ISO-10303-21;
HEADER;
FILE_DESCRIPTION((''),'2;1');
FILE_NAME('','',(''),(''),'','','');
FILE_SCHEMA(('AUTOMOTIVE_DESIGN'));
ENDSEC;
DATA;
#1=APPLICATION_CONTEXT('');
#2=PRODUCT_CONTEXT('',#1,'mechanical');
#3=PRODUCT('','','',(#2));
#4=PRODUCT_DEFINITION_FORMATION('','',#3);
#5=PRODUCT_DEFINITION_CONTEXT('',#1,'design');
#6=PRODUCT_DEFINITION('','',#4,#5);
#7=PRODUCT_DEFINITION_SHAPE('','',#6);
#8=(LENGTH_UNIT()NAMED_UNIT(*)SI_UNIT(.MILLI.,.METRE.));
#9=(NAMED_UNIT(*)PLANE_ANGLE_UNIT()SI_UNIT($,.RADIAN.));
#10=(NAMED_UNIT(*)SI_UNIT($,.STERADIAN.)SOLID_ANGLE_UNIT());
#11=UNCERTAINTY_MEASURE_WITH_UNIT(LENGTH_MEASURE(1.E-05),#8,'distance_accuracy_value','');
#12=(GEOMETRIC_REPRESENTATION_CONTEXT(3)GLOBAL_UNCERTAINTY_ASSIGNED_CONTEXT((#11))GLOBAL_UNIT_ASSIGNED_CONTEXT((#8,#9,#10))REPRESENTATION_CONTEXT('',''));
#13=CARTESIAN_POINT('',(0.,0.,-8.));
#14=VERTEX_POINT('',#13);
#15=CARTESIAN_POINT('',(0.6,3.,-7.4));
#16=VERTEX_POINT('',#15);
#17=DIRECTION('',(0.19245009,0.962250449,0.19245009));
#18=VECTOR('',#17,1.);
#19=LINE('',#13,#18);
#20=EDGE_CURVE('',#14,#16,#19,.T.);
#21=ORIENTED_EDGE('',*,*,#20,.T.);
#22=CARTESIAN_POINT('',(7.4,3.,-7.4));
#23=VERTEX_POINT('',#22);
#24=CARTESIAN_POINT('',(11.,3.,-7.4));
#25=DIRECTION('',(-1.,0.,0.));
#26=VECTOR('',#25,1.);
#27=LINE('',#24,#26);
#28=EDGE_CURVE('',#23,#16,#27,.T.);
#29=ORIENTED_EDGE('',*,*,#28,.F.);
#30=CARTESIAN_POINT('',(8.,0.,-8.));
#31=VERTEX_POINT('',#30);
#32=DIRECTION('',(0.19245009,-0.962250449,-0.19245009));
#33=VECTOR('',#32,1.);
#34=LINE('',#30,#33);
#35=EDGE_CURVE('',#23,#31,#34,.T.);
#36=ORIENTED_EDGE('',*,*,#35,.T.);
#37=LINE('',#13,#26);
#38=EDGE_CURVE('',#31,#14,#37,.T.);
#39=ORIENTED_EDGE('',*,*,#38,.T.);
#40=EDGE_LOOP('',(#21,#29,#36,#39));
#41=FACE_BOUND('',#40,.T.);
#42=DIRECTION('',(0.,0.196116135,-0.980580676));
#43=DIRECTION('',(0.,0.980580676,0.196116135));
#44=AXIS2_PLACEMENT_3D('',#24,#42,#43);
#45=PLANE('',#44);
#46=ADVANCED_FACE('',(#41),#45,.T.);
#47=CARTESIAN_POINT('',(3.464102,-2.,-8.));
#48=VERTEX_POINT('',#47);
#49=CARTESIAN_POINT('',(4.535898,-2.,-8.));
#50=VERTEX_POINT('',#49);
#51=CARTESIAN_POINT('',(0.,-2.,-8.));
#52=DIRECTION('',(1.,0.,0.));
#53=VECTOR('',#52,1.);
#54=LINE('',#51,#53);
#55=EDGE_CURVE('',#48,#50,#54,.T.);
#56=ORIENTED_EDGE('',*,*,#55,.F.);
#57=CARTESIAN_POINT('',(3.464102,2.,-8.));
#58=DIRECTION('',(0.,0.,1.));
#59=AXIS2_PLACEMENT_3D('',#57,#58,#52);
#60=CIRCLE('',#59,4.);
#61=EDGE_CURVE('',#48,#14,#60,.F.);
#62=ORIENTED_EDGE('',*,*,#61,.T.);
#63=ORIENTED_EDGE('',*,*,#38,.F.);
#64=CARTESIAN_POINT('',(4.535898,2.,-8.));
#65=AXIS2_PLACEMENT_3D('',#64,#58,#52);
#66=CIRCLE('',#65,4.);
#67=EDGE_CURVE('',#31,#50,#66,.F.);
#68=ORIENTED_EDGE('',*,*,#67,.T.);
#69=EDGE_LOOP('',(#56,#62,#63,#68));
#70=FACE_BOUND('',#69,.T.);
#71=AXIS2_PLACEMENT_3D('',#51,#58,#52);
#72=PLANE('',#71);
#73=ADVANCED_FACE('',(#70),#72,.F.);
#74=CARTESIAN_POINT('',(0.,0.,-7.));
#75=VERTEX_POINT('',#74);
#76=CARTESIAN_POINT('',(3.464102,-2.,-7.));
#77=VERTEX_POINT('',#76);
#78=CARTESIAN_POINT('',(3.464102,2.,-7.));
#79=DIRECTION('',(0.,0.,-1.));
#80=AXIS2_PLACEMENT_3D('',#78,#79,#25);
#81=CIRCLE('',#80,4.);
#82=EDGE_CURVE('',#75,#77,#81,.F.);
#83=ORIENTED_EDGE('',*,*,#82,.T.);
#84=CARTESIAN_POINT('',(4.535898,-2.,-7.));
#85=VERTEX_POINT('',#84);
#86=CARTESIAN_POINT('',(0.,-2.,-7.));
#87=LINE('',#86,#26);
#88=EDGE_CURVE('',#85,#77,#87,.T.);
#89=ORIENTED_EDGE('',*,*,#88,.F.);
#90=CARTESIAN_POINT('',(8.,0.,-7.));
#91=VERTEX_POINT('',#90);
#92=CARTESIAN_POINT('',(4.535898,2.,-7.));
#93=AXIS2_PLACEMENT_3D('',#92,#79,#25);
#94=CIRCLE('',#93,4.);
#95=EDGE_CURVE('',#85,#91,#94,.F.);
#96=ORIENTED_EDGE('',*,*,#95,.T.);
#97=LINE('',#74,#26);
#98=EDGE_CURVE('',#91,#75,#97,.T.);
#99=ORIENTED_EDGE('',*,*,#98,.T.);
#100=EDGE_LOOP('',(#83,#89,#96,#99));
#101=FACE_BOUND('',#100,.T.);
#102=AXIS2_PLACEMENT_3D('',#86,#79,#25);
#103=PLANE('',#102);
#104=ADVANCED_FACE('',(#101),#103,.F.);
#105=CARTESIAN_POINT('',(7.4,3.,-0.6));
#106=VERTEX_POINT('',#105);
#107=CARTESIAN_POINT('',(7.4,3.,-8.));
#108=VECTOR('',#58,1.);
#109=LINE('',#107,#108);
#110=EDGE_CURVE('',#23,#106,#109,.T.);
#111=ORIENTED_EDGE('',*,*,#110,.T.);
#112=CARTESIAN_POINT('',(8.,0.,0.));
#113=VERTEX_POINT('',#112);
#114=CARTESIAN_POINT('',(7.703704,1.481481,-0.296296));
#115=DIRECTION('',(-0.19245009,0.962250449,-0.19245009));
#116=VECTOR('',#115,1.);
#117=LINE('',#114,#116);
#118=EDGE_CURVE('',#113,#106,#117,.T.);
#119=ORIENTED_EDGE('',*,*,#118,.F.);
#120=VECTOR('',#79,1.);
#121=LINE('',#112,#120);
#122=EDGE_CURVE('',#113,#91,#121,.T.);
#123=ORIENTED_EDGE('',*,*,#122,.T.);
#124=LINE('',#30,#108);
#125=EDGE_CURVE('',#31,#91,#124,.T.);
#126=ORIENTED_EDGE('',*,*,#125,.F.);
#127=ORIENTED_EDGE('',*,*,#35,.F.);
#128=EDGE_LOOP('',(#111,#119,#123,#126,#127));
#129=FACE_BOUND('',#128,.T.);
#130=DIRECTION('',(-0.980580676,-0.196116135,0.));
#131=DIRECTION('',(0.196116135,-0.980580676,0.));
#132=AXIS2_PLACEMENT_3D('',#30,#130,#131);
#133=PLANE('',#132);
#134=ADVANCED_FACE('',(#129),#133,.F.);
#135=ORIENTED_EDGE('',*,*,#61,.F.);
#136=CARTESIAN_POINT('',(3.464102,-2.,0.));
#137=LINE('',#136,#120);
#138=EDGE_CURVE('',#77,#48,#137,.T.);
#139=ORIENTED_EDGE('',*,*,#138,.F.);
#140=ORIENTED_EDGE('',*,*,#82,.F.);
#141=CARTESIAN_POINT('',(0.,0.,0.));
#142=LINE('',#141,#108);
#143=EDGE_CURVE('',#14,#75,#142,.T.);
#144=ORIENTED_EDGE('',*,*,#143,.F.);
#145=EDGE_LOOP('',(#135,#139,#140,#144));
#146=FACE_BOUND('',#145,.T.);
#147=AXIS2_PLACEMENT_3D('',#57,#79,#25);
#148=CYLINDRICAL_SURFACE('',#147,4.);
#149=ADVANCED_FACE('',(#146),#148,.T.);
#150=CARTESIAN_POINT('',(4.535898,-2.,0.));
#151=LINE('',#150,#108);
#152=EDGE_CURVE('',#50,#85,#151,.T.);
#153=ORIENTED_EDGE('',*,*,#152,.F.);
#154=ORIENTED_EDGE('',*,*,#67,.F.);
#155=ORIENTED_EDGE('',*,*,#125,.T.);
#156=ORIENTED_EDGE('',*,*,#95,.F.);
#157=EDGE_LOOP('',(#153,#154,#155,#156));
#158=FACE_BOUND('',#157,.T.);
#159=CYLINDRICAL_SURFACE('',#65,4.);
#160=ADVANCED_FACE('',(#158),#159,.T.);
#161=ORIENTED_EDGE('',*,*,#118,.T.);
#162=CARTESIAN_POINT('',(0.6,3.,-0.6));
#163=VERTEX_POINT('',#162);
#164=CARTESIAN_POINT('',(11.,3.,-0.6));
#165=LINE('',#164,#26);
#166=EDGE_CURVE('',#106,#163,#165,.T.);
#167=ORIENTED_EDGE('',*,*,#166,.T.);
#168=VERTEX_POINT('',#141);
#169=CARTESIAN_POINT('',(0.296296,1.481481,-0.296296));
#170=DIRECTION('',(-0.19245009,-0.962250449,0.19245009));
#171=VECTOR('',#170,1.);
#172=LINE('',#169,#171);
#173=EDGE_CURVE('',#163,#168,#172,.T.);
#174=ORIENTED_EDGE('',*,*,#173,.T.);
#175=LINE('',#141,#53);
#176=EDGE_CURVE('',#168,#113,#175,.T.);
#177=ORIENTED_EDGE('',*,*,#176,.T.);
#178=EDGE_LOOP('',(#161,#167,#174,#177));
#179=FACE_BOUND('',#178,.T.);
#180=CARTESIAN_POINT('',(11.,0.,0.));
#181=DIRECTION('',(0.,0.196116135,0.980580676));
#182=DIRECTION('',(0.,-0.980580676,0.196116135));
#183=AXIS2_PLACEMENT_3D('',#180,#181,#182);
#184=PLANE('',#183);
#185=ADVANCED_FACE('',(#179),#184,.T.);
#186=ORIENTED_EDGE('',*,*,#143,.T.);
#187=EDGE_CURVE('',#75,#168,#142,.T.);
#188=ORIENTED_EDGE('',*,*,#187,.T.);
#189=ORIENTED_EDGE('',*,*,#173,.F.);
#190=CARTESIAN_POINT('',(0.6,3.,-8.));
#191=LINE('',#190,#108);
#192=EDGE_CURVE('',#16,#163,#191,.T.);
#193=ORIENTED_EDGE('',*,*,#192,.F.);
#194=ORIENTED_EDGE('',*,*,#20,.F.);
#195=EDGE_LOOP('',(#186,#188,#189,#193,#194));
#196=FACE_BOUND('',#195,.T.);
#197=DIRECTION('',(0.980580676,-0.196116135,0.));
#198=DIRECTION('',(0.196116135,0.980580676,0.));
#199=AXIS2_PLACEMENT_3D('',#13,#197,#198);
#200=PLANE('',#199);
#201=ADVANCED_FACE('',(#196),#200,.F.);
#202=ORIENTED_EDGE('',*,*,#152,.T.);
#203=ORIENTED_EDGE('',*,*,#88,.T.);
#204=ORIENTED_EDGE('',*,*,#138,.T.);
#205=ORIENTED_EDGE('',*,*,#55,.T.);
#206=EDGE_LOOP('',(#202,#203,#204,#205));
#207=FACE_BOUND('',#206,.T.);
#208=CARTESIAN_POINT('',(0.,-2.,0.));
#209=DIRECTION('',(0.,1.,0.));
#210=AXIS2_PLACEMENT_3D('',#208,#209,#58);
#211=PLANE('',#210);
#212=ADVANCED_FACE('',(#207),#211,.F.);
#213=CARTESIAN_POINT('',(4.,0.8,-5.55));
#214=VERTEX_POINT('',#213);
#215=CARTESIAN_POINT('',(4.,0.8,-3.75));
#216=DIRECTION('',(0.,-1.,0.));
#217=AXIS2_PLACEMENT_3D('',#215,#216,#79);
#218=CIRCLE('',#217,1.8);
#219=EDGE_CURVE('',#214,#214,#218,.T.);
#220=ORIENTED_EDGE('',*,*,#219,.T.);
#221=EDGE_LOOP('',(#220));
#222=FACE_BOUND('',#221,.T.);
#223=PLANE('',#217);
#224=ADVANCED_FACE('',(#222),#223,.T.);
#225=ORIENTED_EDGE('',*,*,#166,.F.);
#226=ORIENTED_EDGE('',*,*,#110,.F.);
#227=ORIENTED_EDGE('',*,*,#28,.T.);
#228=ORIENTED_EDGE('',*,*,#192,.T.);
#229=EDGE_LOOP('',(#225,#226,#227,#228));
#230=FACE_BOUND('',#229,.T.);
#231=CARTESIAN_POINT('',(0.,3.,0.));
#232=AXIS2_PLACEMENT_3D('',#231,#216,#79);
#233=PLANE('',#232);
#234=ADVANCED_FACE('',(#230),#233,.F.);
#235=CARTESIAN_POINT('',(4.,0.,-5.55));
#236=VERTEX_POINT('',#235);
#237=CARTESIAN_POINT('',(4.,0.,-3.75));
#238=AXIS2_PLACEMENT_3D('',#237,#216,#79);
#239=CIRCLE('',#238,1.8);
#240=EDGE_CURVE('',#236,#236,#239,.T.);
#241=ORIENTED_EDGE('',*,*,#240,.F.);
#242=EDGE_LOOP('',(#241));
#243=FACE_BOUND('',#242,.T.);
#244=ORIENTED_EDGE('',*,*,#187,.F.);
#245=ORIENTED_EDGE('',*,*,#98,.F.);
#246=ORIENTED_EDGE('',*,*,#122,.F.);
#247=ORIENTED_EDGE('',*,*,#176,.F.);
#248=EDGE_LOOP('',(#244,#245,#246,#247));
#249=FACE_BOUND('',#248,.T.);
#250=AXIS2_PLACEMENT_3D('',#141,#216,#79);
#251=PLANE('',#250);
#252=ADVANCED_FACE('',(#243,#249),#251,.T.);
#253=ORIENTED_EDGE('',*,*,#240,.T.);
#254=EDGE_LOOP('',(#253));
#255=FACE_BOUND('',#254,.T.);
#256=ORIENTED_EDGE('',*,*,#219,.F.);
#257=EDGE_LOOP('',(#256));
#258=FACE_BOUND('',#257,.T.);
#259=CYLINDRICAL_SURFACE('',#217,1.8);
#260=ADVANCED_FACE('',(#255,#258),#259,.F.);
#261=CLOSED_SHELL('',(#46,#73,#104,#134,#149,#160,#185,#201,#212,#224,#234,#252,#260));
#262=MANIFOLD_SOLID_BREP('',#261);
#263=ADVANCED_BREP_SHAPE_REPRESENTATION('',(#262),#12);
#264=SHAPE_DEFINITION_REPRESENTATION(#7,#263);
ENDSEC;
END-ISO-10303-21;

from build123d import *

# Parameters (mm, degrees)
SKETCH1_W               = 8
SKETCH1_H               = 8
BOSS_EXTRUDE1_DEPTH     = 3
CUT_EXTRUDE1_DEPTH      = 12.704699911
CUT_EXTRUDE1_DEPTH_BACK = 12.704699911
CUT_EXTRUDE2_DEPTH      = 11
SKETCH4_R               = 1.8
CUT_EXTRUDE3_DEPTH      = 0.8
SKETCH5_W               = 8
SKETCH5_H               = 1
BOSS_EXTRUDE2_DEPTH     = 2
FILLET1_R               = 4


with BuildPart() as part:
    # Sketch1 → Boss-Extrude1 (new body)
    with BuildSketch(Plane(origin=(0, 0, 0), x_dir=(1, 0, 0), z_dir=(0, 1, 0))):
        with Locations((4, 4)):
            Rectangle(SKETCH1_W, SKETCH1_H)
    extrude(amount=BOSS_EXTRUDE1_DEPTH)

    # Sketch2 → Cut-Extrude1 (cut, two sides: drawn at the far end of the back side and taken through both)
    with BuildSketch(Plane.XY.offset(-CUT_EXTRUDE1_DEPTH_BACK)):
        Polygon((0, 0), (0.6, 3), (0, 3), align=None)
        Polygon((8, 0), (7.4, 3), (8, 3), align=None)
    extrude(amount=CUT_EXTRUDE1_DEPTH + CUT_EXTRUDE1_DEPTH_BACK, mode=Mode.SUBTRACT)

    # Sketch3 → Cut-Extrude2 (cut)
    with BuildSketch(Plane(origin=(0, 0, 0), x_dir=(0, 0, -1), z_dir=(1, 0, 0))):
        Polygon((0, 0), (0.6, 3), (0, 3), align=None)
        Polygon((8, 3), (7.4, 3), (8, 0), align=None)
    extrude(amount=CUT_EXTRUDE2_DEPTH, mode=Mode.SUBTRACT)

    # Sketch4 → Cut-Extrude3 (cut)
    with BuildSketch(Plane.XZ):
        with Locations(Location((4, -3.75, 0), (0, 0, 270))):
            Circle(SKETCH4_R)
    extrude(amount=-CUT_EXTRUDE3_DEPTH, mode=Mode.SUBTRACT)

    # Sketch5 → Boss-Extrude2 (add)
    with BuildSketch(Plane.XZ):
        with Locations((4, -7.5)):
            Rectangle(SKETCH5_W, SKETCH5_H)
    extrude(amount=BOSS_EXTRUDE2_DEPTH)

    # Fillet1
    # the kernel refuses this fillet: 4 mm, written as the material it takes off along each edge
    with BuildSketch(Plane(origin=(8, -2, -16.660254038), x_dir=(0, 1, 0), z_dir=(0, 0, 1)), Plane(origin=(0, -2, 1.660254038), x_dir=(0, 1, 0), z_dir=(0, 0, -1))) as fillet1_piece_1:
        with BuildLine():
            CenterArc((4, 3.464101615), FILLET1_R, 180, 60)
            Line((0, 3.464101615), (-0.08, 3.464101615))
            Line((-0.08, 3.464101615), (-0.08, 0))
            Line((-0.08, 0), (0, -0.08))
            ThreePointArc((0, -0.08), (1, -0.08), (1.96, -0.069282032))
            Line((1.96, -0.069282032), (2, 0))
        make_face()
    extrude(amount=18.320508076, mode=Mode.SUBTRACT)


solid = part.part
